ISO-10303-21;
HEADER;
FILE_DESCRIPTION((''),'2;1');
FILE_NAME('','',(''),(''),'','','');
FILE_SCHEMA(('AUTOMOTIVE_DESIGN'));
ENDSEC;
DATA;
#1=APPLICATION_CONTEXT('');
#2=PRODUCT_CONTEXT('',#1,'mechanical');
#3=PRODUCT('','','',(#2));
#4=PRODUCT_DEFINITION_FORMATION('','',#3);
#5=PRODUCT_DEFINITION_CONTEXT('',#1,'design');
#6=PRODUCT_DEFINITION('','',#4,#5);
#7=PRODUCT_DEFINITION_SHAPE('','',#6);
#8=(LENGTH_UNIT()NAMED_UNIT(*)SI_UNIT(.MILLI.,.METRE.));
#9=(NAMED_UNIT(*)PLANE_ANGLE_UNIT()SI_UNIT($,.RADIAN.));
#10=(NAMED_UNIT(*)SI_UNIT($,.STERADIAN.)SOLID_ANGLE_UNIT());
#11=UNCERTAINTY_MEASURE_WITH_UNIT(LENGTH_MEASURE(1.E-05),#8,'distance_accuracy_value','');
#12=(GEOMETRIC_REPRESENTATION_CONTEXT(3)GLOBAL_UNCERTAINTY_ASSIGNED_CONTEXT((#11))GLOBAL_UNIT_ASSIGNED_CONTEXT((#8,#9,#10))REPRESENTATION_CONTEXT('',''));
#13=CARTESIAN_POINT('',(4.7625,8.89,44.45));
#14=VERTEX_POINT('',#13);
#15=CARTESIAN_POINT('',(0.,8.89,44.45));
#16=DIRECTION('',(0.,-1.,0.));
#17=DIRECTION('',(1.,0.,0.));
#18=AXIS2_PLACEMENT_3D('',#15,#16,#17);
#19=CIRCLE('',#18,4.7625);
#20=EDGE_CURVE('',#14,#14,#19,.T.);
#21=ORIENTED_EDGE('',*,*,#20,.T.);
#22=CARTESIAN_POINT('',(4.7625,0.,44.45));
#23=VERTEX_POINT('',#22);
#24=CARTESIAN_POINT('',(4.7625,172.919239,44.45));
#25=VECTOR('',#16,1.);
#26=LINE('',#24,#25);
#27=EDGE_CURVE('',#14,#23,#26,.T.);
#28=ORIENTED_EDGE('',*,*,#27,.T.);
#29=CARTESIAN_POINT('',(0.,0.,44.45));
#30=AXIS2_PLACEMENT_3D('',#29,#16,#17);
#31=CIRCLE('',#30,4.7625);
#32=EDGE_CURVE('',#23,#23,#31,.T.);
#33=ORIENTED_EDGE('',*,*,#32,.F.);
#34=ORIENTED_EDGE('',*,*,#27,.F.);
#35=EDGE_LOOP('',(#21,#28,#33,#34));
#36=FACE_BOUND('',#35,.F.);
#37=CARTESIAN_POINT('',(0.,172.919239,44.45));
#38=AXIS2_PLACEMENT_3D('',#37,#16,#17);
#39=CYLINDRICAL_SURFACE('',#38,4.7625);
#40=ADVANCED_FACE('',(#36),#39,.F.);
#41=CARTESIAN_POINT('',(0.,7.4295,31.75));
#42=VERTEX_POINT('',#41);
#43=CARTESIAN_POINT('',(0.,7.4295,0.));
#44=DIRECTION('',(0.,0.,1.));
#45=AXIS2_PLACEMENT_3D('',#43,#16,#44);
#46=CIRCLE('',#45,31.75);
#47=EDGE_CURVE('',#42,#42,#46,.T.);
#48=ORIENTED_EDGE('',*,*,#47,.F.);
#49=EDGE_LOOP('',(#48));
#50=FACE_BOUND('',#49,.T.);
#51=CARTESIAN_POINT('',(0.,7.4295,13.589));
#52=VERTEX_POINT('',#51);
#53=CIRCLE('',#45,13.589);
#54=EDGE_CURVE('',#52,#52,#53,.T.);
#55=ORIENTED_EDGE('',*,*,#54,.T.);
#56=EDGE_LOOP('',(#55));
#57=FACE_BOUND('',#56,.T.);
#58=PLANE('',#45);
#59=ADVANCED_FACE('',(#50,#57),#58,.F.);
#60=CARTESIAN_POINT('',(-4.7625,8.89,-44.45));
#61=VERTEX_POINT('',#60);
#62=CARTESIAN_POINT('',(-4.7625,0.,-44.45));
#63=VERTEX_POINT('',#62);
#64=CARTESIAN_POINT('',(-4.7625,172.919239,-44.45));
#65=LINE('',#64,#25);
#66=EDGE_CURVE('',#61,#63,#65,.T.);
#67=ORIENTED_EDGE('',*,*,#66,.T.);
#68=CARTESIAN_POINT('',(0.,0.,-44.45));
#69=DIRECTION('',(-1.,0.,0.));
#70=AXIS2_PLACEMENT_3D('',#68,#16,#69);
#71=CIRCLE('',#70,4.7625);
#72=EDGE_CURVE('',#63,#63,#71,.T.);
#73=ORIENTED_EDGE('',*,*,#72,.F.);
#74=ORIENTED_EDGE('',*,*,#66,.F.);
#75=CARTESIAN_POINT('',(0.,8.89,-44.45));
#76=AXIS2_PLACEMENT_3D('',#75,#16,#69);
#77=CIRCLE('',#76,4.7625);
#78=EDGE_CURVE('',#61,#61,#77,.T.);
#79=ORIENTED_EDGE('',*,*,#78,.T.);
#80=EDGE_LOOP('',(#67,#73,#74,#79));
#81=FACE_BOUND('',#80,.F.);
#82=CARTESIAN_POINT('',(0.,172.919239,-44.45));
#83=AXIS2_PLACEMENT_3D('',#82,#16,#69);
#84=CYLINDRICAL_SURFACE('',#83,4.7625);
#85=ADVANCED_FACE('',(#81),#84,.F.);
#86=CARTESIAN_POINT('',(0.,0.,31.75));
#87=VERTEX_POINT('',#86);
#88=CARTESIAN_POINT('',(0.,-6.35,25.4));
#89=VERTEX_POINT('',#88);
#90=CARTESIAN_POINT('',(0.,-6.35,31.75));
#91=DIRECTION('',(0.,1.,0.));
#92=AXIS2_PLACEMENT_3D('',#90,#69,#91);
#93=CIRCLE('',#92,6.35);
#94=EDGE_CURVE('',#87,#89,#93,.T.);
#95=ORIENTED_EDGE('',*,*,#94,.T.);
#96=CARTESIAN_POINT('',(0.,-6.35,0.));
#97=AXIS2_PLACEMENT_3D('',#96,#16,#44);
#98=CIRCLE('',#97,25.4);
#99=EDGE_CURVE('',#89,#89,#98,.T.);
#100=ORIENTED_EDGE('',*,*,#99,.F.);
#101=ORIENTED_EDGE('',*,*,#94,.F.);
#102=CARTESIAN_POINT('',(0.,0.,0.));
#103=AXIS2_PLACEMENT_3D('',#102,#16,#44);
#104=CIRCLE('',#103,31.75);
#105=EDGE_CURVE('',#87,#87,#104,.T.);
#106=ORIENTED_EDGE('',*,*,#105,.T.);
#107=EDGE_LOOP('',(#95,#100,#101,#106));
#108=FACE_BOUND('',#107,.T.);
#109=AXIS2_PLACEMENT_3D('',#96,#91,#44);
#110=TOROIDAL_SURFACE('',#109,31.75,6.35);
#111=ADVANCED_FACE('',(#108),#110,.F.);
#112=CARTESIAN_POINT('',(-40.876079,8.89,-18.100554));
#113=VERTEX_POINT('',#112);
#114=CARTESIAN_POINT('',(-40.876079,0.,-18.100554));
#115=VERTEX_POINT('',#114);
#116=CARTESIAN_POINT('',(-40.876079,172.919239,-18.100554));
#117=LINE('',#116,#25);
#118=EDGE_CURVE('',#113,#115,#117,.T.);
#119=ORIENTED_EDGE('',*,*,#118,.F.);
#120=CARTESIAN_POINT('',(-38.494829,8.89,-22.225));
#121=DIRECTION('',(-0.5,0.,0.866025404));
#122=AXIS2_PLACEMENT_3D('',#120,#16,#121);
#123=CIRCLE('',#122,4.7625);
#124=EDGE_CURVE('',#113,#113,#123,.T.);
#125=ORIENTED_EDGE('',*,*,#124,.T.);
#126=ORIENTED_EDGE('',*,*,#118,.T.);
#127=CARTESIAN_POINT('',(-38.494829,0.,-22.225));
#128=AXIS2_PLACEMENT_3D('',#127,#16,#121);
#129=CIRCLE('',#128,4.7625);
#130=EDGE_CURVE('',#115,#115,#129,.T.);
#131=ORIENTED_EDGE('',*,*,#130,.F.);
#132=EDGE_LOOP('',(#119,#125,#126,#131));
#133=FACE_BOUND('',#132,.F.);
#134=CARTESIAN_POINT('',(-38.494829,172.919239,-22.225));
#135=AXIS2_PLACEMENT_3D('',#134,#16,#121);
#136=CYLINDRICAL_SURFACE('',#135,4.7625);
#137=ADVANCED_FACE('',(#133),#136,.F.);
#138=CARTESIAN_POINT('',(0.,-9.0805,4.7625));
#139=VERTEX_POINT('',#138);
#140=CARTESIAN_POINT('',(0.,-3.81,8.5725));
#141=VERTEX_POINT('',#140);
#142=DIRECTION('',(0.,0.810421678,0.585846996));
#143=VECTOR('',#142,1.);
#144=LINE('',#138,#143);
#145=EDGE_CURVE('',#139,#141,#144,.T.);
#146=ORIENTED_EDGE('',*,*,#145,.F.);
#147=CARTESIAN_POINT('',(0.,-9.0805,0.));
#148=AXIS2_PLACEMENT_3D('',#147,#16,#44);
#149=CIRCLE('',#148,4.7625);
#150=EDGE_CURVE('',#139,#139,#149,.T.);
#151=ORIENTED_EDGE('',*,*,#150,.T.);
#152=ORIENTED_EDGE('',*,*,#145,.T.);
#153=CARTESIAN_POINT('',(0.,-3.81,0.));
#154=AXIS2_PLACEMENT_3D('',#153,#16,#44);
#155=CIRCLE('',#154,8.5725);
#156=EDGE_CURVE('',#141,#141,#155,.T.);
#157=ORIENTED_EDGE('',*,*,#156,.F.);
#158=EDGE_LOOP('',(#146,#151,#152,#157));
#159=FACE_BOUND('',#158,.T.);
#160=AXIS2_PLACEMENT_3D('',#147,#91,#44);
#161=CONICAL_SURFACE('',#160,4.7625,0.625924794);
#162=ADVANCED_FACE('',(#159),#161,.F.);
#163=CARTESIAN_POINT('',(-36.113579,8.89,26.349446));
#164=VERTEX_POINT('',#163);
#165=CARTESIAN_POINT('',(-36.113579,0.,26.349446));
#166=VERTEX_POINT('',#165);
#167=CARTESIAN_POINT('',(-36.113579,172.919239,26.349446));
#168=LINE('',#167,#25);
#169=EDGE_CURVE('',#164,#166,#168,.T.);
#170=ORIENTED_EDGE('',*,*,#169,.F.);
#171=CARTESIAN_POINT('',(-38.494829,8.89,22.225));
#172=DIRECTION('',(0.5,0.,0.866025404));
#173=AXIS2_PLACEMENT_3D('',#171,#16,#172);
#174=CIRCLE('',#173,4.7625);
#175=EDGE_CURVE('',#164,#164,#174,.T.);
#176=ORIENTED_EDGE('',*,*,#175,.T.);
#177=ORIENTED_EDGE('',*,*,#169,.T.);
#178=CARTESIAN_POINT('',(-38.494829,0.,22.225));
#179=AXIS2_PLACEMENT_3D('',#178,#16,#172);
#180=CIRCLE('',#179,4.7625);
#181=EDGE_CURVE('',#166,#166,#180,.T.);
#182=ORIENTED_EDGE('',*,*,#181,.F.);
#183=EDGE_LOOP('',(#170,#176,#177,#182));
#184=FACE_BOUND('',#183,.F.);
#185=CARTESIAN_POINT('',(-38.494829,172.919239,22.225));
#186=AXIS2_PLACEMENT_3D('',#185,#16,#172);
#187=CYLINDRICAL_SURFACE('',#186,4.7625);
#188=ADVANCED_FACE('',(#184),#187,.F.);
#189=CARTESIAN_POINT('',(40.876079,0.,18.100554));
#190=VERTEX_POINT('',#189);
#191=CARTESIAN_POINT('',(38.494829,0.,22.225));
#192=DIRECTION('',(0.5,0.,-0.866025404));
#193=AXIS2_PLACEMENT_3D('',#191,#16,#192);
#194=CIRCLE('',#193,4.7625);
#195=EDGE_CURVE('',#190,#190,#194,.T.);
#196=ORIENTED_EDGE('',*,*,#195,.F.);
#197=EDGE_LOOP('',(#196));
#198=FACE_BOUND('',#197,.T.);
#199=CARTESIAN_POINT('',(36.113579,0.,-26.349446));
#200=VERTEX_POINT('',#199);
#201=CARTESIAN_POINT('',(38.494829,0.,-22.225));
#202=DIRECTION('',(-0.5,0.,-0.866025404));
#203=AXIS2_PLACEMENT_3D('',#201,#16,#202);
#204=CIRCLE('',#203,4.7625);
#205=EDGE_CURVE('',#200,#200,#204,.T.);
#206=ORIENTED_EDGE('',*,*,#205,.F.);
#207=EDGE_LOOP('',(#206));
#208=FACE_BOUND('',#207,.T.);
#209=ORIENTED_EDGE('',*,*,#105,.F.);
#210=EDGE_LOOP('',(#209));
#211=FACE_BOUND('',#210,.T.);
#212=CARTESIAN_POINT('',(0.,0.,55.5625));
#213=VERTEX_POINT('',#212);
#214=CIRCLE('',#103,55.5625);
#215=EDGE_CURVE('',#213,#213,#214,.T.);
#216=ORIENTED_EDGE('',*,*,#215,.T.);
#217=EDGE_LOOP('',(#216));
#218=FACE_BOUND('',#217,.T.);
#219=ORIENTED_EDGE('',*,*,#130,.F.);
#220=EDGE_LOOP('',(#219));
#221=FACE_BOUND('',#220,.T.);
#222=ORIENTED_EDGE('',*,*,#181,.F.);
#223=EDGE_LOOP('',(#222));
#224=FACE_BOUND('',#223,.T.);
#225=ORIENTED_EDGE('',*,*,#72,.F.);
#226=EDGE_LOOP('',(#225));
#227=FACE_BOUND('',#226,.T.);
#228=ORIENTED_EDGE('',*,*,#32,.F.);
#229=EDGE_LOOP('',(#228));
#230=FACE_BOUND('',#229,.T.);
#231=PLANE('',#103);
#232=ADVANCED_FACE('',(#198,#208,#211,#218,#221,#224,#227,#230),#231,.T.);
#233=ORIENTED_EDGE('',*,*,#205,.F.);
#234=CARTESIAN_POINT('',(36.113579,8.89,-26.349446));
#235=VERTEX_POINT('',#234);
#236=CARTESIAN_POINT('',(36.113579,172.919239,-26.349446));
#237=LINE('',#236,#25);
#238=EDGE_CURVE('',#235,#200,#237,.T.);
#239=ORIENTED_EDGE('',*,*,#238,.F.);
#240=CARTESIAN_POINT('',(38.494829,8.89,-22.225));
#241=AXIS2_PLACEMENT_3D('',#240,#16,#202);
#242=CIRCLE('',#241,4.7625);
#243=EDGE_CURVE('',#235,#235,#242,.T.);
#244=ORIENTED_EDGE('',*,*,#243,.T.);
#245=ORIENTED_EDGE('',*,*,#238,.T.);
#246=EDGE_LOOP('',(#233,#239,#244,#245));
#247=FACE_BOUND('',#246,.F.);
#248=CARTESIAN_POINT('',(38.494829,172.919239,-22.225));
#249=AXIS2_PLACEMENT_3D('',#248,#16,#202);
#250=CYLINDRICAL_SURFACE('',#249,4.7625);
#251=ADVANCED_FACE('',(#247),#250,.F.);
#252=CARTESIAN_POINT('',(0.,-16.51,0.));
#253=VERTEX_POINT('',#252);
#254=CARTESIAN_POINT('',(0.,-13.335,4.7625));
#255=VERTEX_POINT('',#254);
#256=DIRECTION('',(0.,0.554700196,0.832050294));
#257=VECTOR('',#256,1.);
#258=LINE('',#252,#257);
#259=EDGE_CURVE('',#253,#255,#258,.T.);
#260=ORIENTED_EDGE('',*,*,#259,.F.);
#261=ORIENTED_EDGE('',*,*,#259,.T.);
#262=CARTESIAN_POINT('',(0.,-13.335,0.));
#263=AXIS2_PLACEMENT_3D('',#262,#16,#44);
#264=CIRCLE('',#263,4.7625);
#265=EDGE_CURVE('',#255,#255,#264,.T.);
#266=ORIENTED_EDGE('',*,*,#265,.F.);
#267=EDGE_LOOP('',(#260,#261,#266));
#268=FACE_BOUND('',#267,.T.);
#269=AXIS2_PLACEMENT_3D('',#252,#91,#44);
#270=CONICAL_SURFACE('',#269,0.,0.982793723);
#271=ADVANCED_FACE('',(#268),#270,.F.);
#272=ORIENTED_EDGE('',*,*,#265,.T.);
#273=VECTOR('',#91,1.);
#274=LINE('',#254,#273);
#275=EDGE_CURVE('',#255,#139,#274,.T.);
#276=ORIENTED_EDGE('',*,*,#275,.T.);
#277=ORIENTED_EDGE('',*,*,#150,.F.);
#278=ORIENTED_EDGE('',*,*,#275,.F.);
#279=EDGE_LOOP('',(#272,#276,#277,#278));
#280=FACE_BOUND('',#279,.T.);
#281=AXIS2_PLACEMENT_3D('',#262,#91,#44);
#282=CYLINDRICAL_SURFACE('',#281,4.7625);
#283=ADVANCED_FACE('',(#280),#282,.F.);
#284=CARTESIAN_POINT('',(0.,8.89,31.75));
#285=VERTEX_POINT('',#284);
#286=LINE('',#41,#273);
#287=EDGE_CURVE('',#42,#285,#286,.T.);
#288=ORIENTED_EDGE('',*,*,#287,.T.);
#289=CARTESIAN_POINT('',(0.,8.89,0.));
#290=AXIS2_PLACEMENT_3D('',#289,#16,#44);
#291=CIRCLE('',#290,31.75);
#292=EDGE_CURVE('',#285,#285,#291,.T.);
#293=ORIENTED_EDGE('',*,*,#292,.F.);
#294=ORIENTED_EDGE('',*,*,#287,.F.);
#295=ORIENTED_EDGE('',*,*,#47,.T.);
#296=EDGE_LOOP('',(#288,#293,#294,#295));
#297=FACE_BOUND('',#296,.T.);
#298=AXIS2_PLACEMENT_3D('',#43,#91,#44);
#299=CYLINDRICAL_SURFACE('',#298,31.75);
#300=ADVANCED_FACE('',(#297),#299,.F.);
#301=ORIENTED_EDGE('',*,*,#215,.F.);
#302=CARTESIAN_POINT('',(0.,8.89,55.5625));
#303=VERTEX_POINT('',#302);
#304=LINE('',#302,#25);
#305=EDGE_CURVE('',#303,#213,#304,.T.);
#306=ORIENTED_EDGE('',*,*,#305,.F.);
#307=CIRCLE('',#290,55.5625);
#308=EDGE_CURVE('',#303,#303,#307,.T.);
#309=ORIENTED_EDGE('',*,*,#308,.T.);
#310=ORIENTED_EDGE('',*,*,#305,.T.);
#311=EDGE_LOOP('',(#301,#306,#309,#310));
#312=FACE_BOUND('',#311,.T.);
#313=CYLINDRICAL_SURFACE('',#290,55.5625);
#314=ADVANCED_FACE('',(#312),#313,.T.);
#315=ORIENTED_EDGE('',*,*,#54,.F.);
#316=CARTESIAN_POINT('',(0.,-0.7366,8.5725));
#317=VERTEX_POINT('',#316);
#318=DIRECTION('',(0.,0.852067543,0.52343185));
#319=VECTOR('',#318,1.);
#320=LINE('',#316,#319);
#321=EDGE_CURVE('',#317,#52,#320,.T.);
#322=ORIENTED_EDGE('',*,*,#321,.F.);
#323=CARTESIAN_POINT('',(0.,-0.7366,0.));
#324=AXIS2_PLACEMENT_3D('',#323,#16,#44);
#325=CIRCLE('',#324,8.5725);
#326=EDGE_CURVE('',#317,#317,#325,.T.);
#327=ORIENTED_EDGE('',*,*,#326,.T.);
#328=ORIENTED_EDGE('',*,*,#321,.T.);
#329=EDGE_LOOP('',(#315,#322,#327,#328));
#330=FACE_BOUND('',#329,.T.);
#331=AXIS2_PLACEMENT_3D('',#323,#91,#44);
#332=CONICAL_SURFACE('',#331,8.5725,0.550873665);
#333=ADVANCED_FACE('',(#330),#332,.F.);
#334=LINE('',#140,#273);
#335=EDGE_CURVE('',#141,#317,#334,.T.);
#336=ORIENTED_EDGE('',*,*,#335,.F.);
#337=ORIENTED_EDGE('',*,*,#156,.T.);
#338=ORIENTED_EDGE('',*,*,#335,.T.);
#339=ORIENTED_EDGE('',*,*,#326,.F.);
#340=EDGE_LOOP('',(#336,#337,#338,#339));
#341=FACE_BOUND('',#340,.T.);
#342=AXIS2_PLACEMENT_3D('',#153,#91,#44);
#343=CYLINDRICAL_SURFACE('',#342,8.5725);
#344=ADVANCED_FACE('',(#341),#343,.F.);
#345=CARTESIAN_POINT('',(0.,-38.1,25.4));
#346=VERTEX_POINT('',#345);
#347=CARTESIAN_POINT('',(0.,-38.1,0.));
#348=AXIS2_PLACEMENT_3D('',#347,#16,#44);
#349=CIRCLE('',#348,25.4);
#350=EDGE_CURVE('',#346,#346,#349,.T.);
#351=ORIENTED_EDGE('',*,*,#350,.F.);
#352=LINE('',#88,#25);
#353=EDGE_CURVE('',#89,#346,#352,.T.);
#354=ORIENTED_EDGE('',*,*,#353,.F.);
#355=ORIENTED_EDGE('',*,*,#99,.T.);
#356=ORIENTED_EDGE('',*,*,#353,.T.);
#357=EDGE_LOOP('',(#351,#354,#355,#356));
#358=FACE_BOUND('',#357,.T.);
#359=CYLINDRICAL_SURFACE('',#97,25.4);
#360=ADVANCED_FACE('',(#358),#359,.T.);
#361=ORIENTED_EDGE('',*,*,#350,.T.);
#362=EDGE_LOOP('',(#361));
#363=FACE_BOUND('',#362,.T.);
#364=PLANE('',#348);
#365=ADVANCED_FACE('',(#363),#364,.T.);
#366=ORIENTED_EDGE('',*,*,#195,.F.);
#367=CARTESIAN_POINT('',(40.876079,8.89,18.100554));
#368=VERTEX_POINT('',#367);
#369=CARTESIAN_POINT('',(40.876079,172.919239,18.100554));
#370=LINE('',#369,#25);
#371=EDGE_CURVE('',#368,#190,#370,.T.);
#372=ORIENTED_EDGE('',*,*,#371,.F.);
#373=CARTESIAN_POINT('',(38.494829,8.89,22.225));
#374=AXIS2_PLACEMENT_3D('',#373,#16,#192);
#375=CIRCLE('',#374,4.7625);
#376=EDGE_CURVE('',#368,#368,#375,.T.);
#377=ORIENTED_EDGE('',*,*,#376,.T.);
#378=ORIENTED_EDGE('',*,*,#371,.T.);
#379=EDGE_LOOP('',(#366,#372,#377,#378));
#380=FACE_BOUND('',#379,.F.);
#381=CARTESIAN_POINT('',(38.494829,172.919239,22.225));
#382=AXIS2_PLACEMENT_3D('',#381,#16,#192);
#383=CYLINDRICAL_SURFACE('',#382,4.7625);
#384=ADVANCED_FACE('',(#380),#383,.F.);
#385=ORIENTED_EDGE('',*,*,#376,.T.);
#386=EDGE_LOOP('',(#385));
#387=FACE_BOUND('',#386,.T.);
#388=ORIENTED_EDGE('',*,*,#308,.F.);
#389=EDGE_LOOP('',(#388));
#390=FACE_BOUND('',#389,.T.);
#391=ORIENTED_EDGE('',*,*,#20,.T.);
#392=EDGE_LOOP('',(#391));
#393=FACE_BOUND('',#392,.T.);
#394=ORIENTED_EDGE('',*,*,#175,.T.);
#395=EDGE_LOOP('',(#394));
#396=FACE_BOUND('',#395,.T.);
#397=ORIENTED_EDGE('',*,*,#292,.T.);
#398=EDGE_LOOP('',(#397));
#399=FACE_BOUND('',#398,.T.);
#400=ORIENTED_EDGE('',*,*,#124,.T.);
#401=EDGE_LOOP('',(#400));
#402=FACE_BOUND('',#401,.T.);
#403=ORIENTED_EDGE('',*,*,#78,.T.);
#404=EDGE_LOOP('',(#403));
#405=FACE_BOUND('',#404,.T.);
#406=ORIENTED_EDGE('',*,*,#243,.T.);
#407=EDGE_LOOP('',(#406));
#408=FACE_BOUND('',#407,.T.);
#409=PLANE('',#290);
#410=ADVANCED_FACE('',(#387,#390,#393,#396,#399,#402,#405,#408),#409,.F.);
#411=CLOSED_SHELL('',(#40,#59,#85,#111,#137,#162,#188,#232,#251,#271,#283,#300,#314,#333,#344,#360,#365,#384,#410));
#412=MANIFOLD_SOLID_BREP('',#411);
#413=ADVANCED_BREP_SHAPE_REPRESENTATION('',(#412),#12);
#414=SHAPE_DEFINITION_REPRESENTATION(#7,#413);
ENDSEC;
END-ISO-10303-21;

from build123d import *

# Parameters (mm, degrees)
F3_D            = 9.525
F3_COPIES_COUNT = 6


# Not quite as in the source:
# - a pattern or mirror of a feature is missing from the dataset's text; its kind, count and spacing are read off the source's solid


with BuildPart() as f1:
    # F0 (on Right) → F1 (revolve)
    with BuildSketch(Plane.YZ):
        with BuildLine():
            Line((8.89, 55.5625), (0, 55.5625))
            Line((0, 55.5625), (0, 31.75))
            ThreePointArc((0, 31.75), (-1.8598719395, 27.2598719395), (-6.35, 25.4))
            Line((-6.35, 25.4), (-38.1, 25.4))
            Line((-38.1, 25.4), (-38.1, 0))
            Line((-38.1, 0), (-16.51, 0))
            Line((-16.51, 0), (-13.335, 4.7625))
            Line((-13.335, 4.7625), (-9.0805, 4.7625))
            Line((-9.0805, 4.7625), (-3.81, 8.5725))
            Line((-3.81, 8.5725), (-0.7366, 8.5725))
            Line((-0.7366, 8.5725), (7.4295, 13.589))
            Line((7.4295, 13.589), (7.4295, 31.75))
            Line((7.4295, 31.75), (8.89, 31.75))
            Line((8.89, 31.75), (8.89, 55.5625))
        make_face()
    revolve(axis=Axis((0, -27.305, 0), (0, -1, 0)))

    # F3 (through all)
    with Locations(Plane(origin=(0, 8.89, 0), x_dir=(-1, 0, 0), z_dir=(0, 1, 0))):
        with Locations((0, 44.45)):
            f3 = Hole(F3_D / 2)

    # F3_copies: F3 ×6 about axis
    f3_copies_axis = Axis((0, 0, 0), (0, 1, 0))
    for i in range(1, F3_COPIES_COUNT):
        add(f3.rotate(f3_copies_axis, i * 360 / F3_COPIES_COUNT), mode=Mode.SUBTRACT)


solid = f1.part
